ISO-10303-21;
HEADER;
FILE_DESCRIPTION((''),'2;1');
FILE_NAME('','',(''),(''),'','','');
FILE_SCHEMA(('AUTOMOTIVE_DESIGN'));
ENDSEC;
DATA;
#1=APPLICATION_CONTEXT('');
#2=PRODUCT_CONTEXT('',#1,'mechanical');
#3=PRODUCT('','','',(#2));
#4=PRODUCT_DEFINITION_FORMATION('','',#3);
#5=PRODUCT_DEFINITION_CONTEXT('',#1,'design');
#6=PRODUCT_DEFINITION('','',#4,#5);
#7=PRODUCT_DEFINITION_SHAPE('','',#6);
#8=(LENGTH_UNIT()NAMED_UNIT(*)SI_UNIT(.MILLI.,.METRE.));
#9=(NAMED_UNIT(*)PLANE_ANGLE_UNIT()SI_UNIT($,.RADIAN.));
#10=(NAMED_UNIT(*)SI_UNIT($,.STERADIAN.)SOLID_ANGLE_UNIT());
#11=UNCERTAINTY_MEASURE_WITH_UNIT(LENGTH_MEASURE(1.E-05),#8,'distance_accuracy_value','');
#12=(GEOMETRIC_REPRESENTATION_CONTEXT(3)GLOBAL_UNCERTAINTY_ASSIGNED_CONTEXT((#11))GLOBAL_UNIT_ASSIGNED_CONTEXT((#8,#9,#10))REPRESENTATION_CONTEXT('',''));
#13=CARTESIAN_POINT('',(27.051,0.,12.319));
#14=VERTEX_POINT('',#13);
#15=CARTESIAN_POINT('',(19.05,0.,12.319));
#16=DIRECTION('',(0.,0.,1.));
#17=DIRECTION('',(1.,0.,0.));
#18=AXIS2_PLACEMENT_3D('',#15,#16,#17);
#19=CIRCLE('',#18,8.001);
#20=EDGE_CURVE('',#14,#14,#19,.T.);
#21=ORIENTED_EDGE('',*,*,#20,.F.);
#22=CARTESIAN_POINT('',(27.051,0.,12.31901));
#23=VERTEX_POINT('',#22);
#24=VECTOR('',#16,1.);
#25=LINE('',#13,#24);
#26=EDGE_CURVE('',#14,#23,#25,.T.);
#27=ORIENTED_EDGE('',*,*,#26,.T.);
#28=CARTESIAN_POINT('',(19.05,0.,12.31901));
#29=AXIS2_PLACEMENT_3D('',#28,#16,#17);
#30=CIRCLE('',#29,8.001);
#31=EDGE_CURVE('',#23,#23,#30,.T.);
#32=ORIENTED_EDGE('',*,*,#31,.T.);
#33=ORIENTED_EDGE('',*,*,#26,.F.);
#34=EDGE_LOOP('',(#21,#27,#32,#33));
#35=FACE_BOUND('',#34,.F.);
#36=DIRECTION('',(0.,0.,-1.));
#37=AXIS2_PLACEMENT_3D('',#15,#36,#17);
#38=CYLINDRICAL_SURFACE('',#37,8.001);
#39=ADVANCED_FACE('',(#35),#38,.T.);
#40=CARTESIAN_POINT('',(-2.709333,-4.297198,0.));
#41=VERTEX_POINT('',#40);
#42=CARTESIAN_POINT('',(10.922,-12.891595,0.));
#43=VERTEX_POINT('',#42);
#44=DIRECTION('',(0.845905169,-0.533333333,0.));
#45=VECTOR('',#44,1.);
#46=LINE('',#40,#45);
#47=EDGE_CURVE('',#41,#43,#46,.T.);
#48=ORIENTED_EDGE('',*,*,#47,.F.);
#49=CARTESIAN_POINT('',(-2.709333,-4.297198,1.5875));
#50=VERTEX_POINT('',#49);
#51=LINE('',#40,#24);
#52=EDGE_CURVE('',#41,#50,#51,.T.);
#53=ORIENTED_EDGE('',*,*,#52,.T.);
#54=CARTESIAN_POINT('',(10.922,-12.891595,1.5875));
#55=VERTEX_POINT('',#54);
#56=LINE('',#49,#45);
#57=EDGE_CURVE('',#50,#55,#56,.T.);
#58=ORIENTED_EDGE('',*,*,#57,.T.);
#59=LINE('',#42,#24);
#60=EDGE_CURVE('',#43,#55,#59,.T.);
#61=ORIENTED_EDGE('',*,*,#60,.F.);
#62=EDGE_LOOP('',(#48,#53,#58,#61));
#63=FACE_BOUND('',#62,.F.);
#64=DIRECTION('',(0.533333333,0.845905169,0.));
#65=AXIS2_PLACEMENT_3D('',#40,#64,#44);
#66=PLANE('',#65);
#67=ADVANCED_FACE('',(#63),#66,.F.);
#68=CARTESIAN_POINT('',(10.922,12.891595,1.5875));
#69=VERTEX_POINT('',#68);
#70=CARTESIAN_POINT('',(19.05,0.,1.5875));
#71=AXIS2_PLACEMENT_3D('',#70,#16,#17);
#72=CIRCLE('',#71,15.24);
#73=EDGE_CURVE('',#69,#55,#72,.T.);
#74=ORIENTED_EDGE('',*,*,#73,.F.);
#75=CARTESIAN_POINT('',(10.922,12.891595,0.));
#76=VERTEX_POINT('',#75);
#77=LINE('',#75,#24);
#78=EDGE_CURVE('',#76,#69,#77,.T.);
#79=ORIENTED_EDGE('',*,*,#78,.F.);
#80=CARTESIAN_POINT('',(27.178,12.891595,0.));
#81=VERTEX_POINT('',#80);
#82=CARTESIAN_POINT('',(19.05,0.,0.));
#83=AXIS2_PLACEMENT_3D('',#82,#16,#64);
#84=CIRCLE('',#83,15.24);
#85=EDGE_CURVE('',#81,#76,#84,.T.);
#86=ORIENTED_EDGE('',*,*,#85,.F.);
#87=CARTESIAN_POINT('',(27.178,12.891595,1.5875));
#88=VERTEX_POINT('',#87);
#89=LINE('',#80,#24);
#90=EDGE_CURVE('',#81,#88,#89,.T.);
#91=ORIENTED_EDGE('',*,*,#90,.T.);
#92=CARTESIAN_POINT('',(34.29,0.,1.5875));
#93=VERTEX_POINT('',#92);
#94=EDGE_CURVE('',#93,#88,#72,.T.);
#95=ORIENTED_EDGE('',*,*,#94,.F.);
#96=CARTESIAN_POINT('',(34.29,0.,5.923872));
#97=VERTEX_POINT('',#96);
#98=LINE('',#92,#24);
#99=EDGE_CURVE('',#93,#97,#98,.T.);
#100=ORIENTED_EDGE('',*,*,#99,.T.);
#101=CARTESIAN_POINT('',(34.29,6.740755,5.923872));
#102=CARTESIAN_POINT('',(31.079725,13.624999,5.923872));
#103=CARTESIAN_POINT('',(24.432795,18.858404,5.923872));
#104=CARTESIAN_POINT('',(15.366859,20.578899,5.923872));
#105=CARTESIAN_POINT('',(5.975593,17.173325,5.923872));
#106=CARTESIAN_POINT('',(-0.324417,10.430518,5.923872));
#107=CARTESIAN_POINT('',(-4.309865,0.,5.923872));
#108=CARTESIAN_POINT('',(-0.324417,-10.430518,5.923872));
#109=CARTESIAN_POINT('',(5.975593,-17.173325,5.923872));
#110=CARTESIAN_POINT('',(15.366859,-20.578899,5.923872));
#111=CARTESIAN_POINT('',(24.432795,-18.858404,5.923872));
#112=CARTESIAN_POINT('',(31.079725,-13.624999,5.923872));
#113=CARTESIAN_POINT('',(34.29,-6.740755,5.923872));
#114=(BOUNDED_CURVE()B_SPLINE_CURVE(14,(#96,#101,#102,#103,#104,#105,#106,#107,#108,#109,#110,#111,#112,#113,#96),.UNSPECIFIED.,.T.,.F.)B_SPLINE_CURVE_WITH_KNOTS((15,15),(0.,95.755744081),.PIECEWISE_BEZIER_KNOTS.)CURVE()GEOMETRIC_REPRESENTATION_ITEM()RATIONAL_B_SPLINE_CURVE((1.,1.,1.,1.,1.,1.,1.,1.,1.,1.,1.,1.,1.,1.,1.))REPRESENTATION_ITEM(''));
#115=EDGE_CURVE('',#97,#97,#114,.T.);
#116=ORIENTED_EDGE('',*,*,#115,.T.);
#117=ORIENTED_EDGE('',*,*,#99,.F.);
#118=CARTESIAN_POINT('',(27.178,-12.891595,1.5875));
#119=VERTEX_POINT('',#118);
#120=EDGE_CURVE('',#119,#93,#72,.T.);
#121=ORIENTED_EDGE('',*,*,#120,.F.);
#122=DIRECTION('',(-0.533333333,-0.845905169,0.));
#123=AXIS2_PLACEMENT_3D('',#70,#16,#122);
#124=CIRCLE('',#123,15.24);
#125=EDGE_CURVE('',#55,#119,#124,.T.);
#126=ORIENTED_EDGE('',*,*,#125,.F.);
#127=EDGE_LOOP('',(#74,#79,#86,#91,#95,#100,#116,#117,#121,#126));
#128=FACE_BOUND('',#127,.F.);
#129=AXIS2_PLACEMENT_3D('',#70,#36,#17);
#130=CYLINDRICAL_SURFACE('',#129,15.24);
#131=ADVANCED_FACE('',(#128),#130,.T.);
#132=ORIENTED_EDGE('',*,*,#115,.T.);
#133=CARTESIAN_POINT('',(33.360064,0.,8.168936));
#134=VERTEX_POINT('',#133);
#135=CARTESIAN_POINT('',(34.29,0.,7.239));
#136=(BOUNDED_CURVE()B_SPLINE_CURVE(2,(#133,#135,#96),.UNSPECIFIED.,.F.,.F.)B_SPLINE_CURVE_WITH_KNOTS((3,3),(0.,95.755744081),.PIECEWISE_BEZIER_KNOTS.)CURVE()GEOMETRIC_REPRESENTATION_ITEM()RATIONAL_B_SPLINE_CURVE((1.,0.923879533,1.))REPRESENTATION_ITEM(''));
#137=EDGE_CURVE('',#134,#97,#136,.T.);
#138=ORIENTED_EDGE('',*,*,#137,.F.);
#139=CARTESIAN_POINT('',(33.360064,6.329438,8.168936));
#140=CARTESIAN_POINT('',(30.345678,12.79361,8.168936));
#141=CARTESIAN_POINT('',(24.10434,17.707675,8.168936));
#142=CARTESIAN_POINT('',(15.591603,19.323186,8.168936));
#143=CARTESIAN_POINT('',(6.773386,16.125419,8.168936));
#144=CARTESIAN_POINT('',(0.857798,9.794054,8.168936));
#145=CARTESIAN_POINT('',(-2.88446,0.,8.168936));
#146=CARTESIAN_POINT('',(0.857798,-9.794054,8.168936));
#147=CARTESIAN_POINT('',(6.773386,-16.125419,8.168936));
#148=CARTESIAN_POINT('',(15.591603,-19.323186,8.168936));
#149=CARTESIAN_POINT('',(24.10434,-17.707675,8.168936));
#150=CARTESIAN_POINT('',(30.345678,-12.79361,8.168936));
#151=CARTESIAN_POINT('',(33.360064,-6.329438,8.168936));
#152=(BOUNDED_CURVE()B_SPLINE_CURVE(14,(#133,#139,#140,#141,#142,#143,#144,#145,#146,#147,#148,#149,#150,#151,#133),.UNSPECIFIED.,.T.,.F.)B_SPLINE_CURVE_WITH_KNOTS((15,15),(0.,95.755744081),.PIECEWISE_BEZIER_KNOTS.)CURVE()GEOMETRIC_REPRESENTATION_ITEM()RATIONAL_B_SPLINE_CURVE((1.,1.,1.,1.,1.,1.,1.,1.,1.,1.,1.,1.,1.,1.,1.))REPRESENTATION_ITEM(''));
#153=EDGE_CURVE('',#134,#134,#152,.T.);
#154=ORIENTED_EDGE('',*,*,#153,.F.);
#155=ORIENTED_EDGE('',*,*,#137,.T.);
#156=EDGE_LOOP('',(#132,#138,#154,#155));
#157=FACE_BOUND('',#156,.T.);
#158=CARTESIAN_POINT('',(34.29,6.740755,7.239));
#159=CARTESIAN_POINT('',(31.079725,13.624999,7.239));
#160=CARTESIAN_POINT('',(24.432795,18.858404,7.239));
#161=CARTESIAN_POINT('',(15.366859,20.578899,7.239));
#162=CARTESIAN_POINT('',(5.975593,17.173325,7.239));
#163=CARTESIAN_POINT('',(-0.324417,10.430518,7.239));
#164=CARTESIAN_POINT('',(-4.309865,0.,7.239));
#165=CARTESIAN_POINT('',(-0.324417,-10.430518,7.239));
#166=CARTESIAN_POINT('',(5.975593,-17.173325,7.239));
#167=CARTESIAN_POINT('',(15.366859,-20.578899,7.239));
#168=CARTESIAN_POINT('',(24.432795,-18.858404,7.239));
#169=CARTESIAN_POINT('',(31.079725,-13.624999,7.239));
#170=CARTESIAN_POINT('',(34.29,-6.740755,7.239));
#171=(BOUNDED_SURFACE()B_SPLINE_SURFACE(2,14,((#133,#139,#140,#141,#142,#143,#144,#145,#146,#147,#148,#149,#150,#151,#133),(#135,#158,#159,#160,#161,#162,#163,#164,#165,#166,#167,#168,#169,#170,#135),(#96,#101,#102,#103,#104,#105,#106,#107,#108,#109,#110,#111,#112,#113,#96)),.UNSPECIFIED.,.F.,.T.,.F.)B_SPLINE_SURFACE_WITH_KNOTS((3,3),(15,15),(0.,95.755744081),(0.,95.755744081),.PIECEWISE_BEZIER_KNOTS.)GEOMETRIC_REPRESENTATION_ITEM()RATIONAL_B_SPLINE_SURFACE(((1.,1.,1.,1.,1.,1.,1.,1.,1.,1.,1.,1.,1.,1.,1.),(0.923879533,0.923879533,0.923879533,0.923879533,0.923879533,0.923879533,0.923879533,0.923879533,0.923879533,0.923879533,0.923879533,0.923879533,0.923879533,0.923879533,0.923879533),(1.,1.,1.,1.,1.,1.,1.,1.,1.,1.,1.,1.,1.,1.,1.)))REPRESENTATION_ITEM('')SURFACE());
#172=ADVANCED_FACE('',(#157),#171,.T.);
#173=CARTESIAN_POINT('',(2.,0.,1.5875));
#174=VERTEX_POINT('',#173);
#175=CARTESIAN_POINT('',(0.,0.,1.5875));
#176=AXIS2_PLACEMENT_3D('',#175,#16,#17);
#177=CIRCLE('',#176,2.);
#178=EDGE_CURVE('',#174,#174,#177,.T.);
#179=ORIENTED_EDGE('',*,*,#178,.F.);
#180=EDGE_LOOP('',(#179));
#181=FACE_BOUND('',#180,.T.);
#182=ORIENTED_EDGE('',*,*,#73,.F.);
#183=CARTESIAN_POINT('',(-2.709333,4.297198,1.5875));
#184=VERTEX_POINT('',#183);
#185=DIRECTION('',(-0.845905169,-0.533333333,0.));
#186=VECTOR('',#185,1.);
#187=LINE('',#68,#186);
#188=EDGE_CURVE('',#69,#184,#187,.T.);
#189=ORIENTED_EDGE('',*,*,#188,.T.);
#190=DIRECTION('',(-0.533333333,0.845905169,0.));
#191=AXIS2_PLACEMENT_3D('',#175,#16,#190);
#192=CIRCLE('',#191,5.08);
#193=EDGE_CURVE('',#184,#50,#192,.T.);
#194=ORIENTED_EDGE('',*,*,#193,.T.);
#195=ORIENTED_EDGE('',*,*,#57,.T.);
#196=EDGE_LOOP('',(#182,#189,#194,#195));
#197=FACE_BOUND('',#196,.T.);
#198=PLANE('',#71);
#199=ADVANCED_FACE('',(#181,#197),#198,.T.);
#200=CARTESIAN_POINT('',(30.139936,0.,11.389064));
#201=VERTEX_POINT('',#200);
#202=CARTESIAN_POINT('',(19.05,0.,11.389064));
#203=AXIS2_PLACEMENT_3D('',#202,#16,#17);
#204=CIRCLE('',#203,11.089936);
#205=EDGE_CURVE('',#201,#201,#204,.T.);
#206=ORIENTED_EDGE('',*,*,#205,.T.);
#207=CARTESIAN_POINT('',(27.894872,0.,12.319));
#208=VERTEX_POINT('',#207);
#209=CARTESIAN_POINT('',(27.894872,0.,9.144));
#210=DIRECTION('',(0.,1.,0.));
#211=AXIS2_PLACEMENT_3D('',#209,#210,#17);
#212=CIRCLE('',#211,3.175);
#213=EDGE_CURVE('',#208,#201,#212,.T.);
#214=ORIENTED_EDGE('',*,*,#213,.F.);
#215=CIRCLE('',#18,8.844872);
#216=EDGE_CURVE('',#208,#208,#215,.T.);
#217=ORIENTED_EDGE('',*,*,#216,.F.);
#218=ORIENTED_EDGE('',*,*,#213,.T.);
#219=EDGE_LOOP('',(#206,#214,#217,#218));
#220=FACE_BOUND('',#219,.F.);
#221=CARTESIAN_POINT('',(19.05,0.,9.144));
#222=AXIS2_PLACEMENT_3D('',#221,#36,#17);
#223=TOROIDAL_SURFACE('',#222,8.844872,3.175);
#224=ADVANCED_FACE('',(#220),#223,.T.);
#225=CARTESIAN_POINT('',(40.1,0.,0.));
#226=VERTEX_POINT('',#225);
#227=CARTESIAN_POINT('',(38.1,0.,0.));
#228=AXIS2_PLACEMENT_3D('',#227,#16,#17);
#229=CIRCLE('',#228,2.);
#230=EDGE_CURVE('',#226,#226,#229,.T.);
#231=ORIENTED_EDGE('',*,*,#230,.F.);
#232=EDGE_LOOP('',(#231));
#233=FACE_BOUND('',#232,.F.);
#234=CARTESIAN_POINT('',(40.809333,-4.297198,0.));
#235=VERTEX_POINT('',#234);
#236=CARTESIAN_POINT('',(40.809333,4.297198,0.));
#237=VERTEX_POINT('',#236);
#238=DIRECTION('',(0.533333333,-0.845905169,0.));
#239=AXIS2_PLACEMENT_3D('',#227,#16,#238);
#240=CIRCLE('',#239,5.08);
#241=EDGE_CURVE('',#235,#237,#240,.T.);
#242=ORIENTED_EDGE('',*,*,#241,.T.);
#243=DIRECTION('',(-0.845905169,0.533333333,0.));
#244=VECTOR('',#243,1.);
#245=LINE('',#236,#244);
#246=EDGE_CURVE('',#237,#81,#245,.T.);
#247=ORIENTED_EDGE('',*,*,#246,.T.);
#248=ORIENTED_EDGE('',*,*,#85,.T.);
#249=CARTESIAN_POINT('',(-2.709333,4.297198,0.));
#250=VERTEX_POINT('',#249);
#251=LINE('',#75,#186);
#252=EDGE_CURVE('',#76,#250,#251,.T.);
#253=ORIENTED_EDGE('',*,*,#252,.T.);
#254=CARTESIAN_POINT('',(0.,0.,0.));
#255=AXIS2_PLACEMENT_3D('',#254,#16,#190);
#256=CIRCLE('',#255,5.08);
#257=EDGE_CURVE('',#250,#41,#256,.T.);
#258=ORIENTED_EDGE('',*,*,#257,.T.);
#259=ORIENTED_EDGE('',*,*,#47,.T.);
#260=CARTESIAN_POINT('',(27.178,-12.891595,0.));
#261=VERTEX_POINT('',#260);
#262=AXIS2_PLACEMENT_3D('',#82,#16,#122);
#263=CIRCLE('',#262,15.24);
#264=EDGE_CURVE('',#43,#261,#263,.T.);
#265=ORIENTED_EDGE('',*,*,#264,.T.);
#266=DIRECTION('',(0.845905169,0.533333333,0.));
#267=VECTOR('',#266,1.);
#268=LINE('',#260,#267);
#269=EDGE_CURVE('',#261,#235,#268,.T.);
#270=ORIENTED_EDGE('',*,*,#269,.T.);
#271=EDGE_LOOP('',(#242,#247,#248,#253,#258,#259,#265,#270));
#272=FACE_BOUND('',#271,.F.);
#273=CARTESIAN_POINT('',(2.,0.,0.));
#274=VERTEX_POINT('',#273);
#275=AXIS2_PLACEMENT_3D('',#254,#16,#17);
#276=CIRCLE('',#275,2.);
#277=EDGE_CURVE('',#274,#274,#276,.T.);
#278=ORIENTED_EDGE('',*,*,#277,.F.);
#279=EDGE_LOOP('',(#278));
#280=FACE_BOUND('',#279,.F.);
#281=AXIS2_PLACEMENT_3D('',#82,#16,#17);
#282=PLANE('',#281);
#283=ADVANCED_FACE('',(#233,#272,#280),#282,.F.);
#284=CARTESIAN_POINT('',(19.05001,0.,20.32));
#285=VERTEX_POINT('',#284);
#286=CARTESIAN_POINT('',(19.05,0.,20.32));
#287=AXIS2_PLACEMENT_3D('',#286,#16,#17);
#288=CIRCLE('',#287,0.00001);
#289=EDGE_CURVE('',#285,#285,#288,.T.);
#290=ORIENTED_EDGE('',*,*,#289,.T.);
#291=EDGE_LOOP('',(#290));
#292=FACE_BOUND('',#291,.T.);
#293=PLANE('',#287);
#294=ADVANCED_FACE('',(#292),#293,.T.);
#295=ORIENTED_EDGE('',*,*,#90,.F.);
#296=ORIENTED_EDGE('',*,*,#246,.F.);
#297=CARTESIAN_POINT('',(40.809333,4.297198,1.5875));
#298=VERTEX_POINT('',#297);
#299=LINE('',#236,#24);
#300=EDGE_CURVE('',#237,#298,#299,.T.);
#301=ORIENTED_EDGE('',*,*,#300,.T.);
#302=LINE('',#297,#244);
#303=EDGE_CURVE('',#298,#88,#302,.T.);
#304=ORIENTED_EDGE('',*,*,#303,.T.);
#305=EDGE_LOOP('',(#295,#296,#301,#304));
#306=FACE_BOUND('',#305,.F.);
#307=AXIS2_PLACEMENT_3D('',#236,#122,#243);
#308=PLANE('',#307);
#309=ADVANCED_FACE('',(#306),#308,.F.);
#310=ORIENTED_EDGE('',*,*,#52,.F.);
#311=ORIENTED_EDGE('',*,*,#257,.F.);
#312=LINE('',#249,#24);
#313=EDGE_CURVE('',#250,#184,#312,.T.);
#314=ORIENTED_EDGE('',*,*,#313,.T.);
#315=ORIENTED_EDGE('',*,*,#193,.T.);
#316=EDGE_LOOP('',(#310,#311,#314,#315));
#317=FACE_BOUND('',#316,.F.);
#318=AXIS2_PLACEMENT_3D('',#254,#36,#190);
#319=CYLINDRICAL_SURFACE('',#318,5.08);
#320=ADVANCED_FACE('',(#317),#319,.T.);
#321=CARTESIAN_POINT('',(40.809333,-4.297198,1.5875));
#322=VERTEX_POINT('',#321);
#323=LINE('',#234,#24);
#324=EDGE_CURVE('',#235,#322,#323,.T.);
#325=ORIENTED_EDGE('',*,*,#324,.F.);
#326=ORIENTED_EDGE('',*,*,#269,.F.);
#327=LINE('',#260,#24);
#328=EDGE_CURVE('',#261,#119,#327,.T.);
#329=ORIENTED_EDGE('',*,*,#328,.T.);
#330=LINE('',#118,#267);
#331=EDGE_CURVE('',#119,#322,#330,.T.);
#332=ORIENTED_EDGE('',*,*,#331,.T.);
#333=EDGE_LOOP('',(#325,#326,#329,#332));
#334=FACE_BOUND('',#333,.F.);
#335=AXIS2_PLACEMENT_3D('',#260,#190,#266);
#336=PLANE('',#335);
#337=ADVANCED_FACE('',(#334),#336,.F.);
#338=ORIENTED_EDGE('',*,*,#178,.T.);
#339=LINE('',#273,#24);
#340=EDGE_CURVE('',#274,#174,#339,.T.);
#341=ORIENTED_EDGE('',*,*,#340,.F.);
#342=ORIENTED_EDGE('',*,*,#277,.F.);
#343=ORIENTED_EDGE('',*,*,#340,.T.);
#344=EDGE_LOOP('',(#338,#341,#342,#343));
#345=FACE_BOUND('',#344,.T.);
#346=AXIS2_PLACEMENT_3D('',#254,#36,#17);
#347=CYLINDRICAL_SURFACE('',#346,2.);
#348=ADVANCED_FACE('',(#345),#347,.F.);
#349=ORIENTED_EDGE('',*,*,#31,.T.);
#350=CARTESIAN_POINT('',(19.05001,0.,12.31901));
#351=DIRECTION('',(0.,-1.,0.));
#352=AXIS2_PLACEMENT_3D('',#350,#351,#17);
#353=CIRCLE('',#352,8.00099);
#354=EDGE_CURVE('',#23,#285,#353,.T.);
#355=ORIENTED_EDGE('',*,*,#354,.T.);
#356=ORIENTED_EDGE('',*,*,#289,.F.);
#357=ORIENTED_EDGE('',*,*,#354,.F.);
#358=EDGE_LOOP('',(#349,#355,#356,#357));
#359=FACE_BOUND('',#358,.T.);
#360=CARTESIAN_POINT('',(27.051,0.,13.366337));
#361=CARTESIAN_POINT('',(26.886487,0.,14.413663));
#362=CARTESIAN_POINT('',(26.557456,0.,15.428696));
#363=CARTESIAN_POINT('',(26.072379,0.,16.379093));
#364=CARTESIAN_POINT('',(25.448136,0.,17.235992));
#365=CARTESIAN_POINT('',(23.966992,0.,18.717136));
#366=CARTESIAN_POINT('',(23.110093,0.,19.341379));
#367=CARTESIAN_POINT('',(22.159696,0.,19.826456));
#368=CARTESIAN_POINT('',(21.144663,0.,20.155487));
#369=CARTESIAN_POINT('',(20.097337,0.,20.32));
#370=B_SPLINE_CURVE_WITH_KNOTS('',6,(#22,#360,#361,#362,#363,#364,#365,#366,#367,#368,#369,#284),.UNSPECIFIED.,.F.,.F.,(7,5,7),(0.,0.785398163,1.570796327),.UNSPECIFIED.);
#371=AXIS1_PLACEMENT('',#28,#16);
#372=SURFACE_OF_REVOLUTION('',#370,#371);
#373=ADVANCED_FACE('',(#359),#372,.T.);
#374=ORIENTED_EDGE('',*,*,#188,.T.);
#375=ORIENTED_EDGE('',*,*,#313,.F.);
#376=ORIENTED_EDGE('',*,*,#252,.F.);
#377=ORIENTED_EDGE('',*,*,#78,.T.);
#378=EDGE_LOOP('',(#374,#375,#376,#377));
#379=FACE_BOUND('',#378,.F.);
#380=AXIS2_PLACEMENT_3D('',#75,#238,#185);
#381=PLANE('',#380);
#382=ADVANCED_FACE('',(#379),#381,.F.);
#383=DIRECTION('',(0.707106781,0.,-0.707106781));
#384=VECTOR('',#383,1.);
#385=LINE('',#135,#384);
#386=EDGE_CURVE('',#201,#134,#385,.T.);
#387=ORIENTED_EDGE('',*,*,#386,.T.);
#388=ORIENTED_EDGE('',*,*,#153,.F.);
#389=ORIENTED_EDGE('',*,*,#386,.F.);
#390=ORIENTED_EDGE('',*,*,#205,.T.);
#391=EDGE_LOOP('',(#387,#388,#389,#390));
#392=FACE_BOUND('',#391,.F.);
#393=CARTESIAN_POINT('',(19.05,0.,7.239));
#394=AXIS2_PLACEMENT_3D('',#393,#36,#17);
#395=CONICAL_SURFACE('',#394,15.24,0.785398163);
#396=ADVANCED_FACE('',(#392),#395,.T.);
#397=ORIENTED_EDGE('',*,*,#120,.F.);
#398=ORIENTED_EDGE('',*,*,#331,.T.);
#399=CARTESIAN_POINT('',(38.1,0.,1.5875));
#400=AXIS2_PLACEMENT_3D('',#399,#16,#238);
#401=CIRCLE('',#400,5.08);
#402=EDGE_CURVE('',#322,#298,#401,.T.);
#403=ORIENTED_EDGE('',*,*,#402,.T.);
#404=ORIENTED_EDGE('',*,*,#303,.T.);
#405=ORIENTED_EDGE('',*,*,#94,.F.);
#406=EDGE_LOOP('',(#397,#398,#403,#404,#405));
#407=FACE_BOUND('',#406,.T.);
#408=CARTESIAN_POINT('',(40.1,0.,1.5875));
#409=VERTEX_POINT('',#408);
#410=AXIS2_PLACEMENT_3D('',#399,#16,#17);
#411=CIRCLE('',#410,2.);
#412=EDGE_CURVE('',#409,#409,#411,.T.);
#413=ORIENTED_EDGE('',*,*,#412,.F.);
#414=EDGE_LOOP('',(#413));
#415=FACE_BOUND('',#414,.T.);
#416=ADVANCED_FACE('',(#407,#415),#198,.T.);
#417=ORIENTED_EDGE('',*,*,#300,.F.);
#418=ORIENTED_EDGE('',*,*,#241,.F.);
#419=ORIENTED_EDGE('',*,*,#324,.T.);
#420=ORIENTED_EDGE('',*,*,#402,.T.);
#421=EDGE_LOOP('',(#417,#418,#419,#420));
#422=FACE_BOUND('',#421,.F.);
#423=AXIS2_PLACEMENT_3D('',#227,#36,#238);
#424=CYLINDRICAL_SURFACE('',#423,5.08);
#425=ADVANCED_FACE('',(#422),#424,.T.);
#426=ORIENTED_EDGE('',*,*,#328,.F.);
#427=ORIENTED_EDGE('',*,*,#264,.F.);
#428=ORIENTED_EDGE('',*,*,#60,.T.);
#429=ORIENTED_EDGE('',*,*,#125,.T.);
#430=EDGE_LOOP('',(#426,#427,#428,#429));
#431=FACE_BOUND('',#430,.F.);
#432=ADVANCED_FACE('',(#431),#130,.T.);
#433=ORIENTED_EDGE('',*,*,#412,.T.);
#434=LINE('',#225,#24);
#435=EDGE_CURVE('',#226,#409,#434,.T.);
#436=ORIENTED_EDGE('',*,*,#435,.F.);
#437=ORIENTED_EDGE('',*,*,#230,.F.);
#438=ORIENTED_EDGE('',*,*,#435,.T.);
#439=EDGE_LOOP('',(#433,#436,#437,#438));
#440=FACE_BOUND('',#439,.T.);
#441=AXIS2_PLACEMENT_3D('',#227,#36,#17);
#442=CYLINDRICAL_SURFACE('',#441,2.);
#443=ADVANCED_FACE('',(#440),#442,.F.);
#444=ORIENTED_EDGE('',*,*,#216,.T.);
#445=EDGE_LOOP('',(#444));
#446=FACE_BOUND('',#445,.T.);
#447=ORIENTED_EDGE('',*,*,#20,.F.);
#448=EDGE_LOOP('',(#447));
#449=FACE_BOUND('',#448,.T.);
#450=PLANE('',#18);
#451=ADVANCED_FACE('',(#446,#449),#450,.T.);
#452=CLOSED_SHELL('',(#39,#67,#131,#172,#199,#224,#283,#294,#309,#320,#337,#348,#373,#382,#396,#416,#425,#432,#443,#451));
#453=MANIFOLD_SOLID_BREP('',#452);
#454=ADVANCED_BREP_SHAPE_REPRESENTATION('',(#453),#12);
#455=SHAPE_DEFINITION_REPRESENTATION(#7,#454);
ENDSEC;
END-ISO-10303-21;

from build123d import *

# Parameters (mm, degrees)
F0_R     = 2
F1_DEPTH = 1.5875
F2_R     = 15.24
F3_DEPTH = 10.7315
F4_R     = 8.001
F5_DEPTH = 8.001
F6_R     = 8.00099
F7_SIZE  = 5.08
F8_R     = 3.175


# Not quite as in the source:
# - a fillet or chamfer is up to 0.001 mm smaller than in the source, because OpenCascade refuses the exact size


with BuildPart() as f1:
    # F0 (on Top) → F1 (new body)
    with BuildSketch(Plane.XY):
        with BuildLine():
            Line((10.922, 12.8915947811), (-2.7093333333, 4.2971982604))
            ThreePointArc((-2.7093333333, 4.2971982604), (-5.08, 0), (-2.7093333333, -4.2971982604))
            Line((-2.7093333333, -4.2971982604), (10.922, -12.8915947811))
            ThreePointArc((10.922, -12.8915947811), (19.05, -15.24), (27.178, -12.8915947811))
            Line((27.178, -12.8915947811), (40.8093333333, -4.2971982604))
            ThreePointArc((40.8093333333, -4.2971982604), (43.18, 0), (40.8093333333, 4.2971982604))
            Line((40.8093333333, 4.2971982604), (27.178, 12.8915947811))
            ThreePointArc((27.178, 12.8915947811), (19.05, 15.24), (10.922, 12.8915947811))
        make_face()
        Circle(F0_R, mode=Mode.SUBTRACT)
        with Locations((38.1, 0)):
            Circle(F0_R, mode=Mode.SUBTRACT)
    extrude(amount=F1_DEPTH)

    # F2 (on face) → F3 (join)
    with BuildSketch(Plane.XY.offset(1.5875)):
        with Locations((19.05, 0)):
            Circle(F2_R)
    extrude(amount=F3_DEPTH)

    # F4 (on face) → F5 (join)
    with BuildSketch(Plane.XY.offset(12.319)):
        with Locations((19.05, 0)):
            Circle(F4_R)
    extrude(amount=F5_DEPTH)

    # F6 (radius 8.001 in the source; OpenCascade refuses exactly that, so slightly less here)
    f6_edges = [f1.edges().sort_by_distance(p)[0] for p in [
        (11.049, 0, 20.32),
    ]]
    fillet(f6_edges, radius=F6_R)

    # F7
    f7_edges = [f1.edges().sort_by_distance(p)[0] for p in [
        (3.81, 0, 12.319),
    ]]
    chamfer(f7_edges, length=F7_SIZE)

    # F8
    f8_edges = [f1.edges().sort_by_distance(p)[0] for p in [
        (3.81, 0, 7.239),
        (8.89, 0, 12.319),
    ]]
    fillet(f8_edges, radius=F8_R)


solid = f1.part
